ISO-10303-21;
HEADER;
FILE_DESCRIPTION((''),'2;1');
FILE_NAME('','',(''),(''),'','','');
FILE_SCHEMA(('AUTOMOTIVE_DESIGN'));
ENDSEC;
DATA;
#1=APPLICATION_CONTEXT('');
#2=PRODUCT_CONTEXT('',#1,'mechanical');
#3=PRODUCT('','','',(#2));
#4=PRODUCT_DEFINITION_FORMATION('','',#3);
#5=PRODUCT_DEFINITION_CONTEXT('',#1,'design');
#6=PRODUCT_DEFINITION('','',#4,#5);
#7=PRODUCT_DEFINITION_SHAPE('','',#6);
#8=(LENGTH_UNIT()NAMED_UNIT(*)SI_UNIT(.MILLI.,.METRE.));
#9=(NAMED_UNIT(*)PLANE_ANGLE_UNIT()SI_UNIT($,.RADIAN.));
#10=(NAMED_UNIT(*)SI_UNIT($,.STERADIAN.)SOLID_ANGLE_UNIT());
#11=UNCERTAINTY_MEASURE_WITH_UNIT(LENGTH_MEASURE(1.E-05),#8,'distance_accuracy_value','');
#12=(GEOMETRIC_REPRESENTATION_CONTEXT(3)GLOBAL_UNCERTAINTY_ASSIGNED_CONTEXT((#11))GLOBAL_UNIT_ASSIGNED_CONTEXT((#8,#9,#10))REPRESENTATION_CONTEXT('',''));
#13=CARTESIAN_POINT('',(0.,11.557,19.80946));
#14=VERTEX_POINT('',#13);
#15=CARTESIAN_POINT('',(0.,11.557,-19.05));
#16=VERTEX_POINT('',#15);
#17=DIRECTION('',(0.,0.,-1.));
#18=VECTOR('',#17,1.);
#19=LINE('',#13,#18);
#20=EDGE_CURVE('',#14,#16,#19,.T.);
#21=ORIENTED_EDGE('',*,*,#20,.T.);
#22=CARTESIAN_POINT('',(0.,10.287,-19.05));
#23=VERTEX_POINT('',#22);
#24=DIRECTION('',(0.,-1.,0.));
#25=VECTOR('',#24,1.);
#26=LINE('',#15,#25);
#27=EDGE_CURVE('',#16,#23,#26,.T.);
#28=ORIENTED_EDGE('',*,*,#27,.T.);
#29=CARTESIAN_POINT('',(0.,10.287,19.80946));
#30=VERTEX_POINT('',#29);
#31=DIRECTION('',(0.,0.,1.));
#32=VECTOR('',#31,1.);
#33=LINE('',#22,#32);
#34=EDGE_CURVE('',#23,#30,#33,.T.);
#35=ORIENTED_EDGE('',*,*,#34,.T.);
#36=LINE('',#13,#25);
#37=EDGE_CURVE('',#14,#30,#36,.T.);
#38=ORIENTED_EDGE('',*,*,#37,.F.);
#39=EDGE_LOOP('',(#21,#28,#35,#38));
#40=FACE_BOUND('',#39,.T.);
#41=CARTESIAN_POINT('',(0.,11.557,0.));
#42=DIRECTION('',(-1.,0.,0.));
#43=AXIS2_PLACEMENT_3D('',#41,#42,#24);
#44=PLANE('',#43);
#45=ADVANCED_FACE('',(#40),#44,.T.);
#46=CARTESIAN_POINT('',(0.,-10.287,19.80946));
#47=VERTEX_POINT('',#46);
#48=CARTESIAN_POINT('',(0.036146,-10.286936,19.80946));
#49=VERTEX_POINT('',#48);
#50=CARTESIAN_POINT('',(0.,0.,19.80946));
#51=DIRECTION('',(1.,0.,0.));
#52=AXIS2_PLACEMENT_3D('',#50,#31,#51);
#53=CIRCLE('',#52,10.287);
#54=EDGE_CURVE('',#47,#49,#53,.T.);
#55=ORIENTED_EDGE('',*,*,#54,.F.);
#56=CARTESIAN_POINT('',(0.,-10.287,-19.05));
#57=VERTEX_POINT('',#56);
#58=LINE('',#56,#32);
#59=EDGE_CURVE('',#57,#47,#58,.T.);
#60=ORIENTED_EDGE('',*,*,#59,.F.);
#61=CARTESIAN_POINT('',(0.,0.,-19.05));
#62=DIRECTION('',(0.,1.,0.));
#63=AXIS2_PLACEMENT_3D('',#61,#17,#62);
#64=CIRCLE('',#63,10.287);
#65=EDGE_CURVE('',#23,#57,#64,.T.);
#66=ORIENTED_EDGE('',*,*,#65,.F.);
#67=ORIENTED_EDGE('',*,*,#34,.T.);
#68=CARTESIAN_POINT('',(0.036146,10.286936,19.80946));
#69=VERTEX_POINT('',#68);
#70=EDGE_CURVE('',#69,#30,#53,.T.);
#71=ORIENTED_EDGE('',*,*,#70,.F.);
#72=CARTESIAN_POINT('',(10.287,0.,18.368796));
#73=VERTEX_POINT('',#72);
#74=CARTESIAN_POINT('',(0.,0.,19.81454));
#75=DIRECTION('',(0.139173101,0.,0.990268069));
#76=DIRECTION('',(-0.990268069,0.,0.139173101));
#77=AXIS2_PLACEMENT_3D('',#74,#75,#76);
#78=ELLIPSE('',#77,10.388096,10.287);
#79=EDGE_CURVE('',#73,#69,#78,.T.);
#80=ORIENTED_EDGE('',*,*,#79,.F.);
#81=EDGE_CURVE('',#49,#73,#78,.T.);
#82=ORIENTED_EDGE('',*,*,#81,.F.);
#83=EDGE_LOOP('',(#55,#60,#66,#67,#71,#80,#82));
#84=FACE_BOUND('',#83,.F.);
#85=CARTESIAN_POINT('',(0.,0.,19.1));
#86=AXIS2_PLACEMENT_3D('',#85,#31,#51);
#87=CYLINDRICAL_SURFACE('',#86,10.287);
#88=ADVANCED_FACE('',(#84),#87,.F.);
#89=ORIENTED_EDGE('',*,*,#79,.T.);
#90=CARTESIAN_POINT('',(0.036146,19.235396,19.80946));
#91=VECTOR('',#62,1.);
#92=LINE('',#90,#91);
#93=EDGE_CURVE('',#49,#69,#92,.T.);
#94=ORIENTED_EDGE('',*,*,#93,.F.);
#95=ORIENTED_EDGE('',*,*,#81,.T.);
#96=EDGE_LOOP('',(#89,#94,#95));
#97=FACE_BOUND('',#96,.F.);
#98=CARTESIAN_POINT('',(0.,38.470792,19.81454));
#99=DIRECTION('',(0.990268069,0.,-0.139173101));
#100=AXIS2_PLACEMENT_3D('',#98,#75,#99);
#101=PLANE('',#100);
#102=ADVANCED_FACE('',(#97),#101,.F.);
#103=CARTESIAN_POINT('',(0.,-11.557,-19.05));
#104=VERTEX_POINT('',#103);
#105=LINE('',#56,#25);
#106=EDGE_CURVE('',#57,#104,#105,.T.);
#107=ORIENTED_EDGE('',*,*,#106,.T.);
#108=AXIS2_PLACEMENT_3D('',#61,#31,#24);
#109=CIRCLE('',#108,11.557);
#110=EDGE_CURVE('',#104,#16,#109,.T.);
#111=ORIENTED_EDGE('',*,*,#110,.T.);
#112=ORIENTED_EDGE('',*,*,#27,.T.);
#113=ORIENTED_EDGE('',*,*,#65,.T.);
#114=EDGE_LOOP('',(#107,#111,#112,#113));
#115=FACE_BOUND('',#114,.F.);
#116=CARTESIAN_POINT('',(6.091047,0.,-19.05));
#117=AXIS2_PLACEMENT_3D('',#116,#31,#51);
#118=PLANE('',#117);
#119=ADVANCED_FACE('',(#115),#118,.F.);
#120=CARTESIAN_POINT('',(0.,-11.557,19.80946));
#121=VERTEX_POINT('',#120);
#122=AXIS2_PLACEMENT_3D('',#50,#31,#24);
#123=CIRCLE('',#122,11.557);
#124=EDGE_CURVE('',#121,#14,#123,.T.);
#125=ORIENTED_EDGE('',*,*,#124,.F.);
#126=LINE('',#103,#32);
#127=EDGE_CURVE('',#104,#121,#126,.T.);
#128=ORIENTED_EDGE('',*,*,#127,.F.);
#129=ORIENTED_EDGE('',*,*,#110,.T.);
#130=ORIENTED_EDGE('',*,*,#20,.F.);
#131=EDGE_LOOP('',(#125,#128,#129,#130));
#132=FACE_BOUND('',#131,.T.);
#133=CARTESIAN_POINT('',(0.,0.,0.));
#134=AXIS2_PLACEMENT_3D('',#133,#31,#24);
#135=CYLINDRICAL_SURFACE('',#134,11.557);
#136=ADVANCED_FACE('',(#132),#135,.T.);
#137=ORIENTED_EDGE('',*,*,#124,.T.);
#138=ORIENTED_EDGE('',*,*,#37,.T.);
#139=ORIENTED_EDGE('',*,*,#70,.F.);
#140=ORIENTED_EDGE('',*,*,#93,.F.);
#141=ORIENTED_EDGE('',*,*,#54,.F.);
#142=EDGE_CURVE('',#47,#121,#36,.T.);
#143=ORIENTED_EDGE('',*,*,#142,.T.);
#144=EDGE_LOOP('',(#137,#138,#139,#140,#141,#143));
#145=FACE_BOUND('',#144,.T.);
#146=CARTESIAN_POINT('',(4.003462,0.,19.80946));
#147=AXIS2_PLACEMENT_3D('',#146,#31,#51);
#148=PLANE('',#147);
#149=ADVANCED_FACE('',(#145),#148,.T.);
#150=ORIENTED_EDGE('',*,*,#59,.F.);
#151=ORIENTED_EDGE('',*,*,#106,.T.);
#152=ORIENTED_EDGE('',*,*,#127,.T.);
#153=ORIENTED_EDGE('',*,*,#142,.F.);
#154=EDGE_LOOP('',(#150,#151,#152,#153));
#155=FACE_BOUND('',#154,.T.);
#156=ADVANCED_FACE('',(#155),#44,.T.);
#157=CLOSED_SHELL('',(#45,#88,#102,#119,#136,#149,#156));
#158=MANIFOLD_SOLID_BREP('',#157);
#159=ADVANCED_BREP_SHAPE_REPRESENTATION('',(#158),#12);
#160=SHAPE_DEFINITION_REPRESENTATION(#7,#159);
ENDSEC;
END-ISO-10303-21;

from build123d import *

# Parameters (mm, degrees)
F1_DEPTH    = 19.05
F3_DEPTH    = 0.75946
F4_T4_DEPTH = 76.9415838332
F4_S5_R     = 10.287
F4_T6_DEPTH = 40


# Not quite as in the source:
# - a fillet or chamfer that OpenCascade refuses, or shapes differently, is made with other operations: its cross-section is extruded or revolved along the edge and cut away or added


with BuildPart() as f1:
    # F0 (on Top) → F1 (new body, symmetric)
    with BuildSketch(Plane.XY):
        with BuildLine():
            ThreePointArc((0, 10.287), (10.287, 0), (0, -10.287))
            Line((0, -10.287), (0, -11.557))
            ThreePointArc((0, -11.557), (11.557, 0), (0, 11.557))
            Line((0, 11.557), (0, 10.287))
        make_face()
    extrude(amount=F1_DEPTH, both=True)

    # F2 (on face) → F3 (join, symmetric)
    with BuildSketch(Plane.XY.offset(19.05)):
        with BuildLine():
            Line((0, 11.557), (0, -11.557))
            ThreePointArc((0, -11.557), (11.557, 0), (0, 11.557))
        make_face()
    extrude(amount=F3_DEPTH, both=True)

    # F4: chamfer of 1.524 x 10.8438234569 on 1 edges, made by hand


with BuildPart() as f4_tool2:
    # F4_s3 → F4_t4 (new body)
    with BuildSketch(Plane.XZ.offset(-38.4707919166)):
        Polygon((0, 19.81454), (10.8438234569, 18.29054), (0, 18.29054), align=None)
    extrude(amount=F4_T4_DEPTH)

    # F4_s5 → F4_t6 (intersect, symmetric)
    with BuildSketch(Plane.XY.offset(19.1)):
        Circle(F4_S5_R)
    extrude(amount=F4_T6_DEPTH, both=True, mode=Mode.INTERSECT)


with BuildPart() as f1_1:
    add(f1.part)

    # F4_t1: cut F4_tool2
    add(f4_tool2.part, mode=Mode.SUBTRACT)


solid = f1_1.part
